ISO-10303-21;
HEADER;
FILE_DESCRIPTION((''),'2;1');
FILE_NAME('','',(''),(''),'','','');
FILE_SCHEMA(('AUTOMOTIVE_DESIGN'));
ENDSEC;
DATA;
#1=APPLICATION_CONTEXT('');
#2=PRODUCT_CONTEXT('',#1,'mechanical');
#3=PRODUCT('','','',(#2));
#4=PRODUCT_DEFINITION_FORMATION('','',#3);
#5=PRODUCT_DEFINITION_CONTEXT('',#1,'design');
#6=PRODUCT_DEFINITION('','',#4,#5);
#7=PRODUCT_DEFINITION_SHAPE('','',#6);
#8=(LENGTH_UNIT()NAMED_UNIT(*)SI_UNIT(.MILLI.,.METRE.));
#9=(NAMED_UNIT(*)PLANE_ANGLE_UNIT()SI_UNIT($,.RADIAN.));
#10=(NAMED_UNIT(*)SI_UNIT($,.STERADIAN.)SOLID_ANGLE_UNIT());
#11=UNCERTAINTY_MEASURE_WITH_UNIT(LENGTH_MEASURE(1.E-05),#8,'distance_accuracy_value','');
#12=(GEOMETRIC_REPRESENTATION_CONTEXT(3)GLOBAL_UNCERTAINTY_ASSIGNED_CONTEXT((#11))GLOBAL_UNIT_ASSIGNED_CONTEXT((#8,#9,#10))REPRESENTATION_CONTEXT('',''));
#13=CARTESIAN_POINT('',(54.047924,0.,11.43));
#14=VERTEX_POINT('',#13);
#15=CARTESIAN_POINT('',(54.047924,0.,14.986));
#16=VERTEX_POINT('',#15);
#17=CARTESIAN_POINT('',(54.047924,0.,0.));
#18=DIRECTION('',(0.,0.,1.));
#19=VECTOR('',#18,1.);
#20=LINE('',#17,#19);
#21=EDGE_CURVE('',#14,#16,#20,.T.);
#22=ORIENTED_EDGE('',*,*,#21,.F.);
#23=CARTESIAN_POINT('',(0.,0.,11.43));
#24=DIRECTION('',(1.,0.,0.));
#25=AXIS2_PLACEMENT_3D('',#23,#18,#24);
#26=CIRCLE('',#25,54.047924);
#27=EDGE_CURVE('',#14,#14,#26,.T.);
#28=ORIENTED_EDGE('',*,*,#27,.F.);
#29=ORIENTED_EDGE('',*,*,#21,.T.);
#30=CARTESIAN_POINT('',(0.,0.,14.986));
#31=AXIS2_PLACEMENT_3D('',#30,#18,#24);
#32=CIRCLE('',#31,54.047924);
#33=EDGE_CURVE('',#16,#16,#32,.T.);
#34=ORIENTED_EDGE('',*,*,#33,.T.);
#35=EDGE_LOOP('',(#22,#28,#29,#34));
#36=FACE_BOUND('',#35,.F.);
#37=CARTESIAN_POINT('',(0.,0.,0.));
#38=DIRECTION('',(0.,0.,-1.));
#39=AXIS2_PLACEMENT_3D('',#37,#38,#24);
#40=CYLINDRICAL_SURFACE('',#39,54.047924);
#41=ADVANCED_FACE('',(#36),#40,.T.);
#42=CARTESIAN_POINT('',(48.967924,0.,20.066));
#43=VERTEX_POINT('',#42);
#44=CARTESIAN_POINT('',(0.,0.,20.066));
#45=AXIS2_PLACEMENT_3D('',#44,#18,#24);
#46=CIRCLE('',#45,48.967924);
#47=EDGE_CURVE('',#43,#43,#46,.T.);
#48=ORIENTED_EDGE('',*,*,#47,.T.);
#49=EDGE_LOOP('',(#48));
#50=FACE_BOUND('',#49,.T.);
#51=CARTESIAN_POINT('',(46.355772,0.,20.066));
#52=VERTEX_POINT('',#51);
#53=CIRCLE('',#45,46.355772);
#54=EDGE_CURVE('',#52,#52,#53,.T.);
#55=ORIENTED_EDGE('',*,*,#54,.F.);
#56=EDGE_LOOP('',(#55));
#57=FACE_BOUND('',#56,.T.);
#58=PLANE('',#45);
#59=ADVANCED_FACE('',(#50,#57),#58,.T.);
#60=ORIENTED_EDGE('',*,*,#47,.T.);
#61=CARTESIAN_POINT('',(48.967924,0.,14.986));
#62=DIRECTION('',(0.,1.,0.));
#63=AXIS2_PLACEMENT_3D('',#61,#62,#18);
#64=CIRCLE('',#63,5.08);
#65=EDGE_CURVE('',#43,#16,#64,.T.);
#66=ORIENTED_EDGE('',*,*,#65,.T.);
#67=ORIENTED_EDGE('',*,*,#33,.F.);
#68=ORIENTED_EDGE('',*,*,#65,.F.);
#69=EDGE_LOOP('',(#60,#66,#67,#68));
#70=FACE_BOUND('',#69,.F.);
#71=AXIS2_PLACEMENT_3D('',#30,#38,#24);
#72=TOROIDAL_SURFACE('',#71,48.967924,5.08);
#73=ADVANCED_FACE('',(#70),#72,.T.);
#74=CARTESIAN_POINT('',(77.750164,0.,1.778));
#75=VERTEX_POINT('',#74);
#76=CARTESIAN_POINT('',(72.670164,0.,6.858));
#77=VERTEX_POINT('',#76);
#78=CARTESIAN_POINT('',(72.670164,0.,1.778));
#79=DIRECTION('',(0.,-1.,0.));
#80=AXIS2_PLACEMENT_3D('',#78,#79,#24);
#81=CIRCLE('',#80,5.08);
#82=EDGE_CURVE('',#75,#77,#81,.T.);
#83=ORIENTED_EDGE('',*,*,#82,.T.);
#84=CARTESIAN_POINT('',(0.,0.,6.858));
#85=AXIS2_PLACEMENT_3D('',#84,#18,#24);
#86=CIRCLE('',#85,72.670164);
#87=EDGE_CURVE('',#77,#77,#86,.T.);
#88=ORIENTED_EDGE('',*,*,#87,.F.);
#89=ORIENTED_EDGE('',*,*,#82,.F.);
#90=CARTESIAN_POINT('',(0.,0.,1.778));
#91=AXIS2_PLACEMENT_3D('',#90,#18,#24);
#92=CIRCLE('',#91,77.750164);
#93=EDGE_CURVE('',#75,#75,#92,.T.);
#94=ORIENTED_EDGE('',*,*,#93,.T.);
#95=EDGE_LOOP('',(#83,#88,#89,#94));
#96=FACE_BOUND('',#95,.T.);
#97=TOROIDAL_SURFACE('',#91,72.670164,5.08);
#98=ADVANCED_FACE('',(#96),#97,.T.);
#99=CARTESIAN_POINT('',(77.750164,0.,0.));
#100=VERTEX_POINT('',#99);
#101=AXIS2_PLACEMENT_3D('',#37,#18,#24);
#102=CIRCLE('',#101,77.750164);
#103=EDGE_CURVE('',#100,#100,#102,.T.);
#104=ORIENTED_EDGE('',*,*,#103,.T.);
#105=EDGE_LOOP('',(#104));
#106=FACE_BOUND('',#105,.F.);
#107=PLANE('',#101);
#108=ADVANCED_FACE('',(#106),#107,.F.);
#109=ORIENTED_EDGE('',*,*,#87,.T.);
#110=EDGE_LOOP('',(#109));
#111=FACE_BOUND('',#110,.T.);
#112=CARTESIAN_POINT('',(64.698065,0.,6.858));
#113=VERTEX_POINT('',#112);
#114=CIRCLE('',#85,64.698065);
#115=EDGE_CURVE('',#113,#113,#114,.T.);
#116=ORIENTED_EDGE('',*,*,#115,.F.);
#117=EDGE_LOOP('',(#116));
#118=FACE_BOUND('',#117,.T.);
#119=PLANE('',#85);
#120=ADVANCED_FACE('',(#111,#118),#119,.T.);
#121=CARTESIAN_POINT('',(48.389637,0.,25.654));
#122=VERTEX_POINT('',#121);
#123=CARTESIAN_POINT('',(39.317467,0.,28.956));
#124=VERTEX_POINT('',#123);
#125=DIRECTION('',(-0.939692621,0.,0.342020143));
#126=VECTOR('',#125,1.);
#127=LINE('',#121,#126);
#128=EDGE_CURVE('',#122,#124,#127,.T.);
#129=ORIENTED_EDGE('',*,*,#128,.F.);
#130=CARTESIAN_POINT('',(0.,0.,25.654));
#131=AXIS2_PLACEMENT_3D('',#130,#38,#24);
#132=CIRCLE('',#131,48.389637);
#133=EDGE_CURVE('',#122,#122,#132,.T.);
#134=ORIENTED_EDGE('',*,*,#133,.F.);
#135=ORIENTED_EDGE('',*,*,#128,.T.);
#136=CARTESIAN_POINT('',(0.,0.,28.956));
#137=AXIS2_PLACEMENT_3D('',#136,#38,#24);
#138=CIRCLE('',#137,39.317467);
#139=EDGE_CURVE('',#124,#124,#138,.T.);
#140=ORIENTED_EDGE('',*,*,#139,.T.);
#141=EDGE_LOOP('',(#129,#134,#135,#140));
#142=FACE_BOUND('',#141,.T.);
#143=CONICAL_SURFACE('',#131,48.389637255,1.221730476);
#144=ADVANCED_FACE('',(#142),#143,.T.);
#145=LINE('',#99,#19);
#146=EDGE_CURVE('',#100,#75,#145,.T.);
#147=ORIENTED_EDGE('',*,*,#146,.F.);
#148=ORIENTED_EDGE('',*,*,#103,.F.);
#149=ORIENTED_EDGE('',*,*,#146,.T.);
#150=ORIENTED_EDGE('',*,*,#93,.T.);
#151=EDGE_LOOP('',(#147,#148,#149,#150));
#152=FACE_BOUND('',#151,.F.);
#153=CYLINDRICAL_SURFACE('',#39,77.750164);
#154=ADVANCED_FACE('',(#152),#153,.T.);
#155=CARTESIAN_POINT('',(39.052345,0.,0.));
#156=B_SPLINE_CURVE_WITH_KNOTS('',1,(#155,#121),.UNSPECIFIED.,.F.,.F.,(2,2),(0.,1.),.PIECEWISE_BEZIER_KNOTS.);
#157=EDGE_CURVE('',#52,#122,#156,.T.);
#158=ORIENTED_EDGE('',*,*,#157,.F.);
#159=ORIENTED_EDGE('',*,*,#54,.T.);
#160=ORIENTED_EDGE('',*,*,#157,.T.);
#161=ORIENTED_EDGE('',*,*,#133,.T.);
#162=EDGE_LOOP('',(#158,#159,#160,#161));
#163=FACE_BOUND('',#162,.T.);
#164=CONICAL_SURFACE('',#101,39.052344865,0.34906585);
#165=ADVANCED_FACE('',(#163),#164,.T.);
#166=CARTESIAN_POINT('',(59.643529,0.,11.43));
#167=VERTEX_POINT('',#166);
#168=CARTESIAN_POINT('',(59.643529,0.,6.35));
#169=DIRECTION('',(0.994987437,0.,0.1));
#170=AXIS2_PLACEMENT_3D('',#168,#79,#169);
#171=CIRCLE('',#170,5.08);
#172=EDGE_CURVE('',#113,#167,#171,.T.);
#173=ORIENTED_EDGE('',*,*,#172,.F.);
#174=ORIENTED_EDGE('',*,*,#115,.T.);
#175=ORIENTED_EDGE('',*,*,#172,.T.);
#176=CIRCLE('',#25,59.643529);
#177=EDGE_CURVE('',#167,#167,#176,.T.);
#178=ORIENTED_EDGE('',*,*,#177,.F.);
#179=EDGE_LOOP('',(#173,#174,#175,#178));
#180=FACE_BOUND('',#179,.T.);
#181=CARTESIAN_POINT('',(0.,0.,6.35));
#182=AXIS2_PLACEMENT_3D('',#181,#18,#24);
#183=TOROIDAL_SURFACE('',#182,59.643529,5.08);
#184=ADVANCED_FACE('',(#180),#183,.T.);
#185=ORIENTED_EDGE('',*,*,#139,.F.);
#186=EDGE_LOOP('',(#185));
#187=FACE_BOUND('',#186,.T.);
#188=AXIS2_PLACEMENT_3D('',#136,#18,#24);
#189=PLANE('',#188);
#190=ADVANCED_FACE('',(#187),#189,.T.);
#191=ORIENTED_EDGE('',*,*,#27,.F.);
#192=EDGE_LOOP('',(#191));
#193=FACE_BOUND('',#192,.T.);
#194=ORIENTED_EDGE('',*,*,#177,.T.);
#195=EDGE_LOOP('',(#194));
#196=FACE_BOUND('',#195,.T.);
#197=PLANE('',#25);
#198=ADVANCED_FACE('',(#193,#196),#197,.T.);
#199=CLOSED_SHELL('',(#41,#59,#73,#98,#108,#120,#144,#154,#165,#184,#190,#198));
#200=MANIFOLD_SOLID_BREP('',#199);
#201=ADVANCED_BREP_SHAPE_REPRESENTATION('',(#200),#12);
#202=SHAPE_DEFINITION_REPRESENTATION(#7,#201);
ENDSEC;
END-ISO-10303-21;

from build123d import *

# Parameters (mm, degrees)
F0_R      = 77.7501635543
F0_R_2    = 64.6980648952
F1_DEPTH  = 6.858
F0_R_3    = 54.0479242204
F2_DEPTH  = 11.43
F0_R_4    = 39.0523448649
F3_DEPTH  = 20.066
F5_DEPTH  = 25.654
F5_TAPER  = -20
F5_FACE_R = 48.3896372547
F6_DEPTH  = 3.302
F6_TAPER  = 70


# Not quite as in the source:
# - a fillet or chamfer that OpenCascade refuses, or shapes differently, is made with other operations: its cross-section is extruded or revolved along the edge and cut away or added


with BuildPart() as f1:
    # F0 (on Top) → F1 (new body)
    with BuildSketch(Plane.XY):
        Circle(F0_R)
        Circle(F0_R_2, mode=Mode.SUBTRACT)
    extrude(amount=F1_DEPTH)

    # F0 (on Top) → F2 (join)
    with BuildSketch(Plane.XY):
        Circle(F0_R_2)
        Circle(F0_R_3, mode=Mode.SUBTRACT)
    extrude(amount=F2_DEPTH)

    # F0 (on Top) → F3 (join)
    with BuildSketch(Plane.XY):
        Circle(F0_R_3)
        Circle(F0_R_4, mode=Mode.SUBTRACT)
    extrude(amount=F3_DEPTH)

    # F4: fillet of radius 5.08 on 3 edges, made by hand

    # F4_s1 → F4_t2 (revolve, cut)
    with BuildSketch(Plane.XZ):
        with BuildLine():
            ThreePointArc((48.9679242204, 20.066), (52.5600266688, 18.5781024484), (54.0479242204, 14.986))
            Line((54.0479242204, 14.986), (54.0479242204, 20.066))
            Line((54.0479242204, 20.066), (48.9679242204, 20.066))
        make_face()
    revolve(axis=Axis((0, 0, 20.066), (0, 0, 1)), mode=Mode.SUBTRACT)

    # F4_s3 → F4_t4 (revolve, cut)
    with BuildSketch(Plane.XZ):
        with BuildLine():
            ThreePointArc((64.6980648952, 6.858), (63.0512963124, 10.1174288314), (59.6435287147, 11.43))
            Line((59.6435287147, 11.43), (64.6980648952, 11.43))
            Line((64.6980648952, 11.43), (64.6980648952, 6.858))
        make_face()
    revolve(axis=Axis((0, 0, 11.43), (0, 0, 1)), mode=Mode.SUBTRACT)

    # F4_s5 → F4_t6 (revolve, cut)
    with BuildSketch(Plane.XZ):
        with BuildLine():
            ThreePointArc((77.7501635543, 1.778), (76.2622660027, 5.3701024484), (72.6701635543, 6.858))
            Line((72.6701635543, 6.858), (77.7501635543, 6.858))
            Line((77.7501635543, 6.858), (77.7501635543, 1.778))
        make_face()
    revolve(axis=Axis((0, 0, 6.858), (0, 0, 1)), mode=Mode.SUBTRACT)

    # F0 (on Top) → F5 (join)
    with BuildSketch(Plane.XY):
        Circle(F0_R_4)
    extrude(amount=F5_DEPTH, taper=F5_TAPER)

    # F5_face (on face) → F6 (join)
    with BuildSketch(Plane.XY.offset(25.654)):
        Circle(F5_FACE_R)
    extrude(amount=F6_DEPTH, taper=F6_TAPER)


solid = f1.part
